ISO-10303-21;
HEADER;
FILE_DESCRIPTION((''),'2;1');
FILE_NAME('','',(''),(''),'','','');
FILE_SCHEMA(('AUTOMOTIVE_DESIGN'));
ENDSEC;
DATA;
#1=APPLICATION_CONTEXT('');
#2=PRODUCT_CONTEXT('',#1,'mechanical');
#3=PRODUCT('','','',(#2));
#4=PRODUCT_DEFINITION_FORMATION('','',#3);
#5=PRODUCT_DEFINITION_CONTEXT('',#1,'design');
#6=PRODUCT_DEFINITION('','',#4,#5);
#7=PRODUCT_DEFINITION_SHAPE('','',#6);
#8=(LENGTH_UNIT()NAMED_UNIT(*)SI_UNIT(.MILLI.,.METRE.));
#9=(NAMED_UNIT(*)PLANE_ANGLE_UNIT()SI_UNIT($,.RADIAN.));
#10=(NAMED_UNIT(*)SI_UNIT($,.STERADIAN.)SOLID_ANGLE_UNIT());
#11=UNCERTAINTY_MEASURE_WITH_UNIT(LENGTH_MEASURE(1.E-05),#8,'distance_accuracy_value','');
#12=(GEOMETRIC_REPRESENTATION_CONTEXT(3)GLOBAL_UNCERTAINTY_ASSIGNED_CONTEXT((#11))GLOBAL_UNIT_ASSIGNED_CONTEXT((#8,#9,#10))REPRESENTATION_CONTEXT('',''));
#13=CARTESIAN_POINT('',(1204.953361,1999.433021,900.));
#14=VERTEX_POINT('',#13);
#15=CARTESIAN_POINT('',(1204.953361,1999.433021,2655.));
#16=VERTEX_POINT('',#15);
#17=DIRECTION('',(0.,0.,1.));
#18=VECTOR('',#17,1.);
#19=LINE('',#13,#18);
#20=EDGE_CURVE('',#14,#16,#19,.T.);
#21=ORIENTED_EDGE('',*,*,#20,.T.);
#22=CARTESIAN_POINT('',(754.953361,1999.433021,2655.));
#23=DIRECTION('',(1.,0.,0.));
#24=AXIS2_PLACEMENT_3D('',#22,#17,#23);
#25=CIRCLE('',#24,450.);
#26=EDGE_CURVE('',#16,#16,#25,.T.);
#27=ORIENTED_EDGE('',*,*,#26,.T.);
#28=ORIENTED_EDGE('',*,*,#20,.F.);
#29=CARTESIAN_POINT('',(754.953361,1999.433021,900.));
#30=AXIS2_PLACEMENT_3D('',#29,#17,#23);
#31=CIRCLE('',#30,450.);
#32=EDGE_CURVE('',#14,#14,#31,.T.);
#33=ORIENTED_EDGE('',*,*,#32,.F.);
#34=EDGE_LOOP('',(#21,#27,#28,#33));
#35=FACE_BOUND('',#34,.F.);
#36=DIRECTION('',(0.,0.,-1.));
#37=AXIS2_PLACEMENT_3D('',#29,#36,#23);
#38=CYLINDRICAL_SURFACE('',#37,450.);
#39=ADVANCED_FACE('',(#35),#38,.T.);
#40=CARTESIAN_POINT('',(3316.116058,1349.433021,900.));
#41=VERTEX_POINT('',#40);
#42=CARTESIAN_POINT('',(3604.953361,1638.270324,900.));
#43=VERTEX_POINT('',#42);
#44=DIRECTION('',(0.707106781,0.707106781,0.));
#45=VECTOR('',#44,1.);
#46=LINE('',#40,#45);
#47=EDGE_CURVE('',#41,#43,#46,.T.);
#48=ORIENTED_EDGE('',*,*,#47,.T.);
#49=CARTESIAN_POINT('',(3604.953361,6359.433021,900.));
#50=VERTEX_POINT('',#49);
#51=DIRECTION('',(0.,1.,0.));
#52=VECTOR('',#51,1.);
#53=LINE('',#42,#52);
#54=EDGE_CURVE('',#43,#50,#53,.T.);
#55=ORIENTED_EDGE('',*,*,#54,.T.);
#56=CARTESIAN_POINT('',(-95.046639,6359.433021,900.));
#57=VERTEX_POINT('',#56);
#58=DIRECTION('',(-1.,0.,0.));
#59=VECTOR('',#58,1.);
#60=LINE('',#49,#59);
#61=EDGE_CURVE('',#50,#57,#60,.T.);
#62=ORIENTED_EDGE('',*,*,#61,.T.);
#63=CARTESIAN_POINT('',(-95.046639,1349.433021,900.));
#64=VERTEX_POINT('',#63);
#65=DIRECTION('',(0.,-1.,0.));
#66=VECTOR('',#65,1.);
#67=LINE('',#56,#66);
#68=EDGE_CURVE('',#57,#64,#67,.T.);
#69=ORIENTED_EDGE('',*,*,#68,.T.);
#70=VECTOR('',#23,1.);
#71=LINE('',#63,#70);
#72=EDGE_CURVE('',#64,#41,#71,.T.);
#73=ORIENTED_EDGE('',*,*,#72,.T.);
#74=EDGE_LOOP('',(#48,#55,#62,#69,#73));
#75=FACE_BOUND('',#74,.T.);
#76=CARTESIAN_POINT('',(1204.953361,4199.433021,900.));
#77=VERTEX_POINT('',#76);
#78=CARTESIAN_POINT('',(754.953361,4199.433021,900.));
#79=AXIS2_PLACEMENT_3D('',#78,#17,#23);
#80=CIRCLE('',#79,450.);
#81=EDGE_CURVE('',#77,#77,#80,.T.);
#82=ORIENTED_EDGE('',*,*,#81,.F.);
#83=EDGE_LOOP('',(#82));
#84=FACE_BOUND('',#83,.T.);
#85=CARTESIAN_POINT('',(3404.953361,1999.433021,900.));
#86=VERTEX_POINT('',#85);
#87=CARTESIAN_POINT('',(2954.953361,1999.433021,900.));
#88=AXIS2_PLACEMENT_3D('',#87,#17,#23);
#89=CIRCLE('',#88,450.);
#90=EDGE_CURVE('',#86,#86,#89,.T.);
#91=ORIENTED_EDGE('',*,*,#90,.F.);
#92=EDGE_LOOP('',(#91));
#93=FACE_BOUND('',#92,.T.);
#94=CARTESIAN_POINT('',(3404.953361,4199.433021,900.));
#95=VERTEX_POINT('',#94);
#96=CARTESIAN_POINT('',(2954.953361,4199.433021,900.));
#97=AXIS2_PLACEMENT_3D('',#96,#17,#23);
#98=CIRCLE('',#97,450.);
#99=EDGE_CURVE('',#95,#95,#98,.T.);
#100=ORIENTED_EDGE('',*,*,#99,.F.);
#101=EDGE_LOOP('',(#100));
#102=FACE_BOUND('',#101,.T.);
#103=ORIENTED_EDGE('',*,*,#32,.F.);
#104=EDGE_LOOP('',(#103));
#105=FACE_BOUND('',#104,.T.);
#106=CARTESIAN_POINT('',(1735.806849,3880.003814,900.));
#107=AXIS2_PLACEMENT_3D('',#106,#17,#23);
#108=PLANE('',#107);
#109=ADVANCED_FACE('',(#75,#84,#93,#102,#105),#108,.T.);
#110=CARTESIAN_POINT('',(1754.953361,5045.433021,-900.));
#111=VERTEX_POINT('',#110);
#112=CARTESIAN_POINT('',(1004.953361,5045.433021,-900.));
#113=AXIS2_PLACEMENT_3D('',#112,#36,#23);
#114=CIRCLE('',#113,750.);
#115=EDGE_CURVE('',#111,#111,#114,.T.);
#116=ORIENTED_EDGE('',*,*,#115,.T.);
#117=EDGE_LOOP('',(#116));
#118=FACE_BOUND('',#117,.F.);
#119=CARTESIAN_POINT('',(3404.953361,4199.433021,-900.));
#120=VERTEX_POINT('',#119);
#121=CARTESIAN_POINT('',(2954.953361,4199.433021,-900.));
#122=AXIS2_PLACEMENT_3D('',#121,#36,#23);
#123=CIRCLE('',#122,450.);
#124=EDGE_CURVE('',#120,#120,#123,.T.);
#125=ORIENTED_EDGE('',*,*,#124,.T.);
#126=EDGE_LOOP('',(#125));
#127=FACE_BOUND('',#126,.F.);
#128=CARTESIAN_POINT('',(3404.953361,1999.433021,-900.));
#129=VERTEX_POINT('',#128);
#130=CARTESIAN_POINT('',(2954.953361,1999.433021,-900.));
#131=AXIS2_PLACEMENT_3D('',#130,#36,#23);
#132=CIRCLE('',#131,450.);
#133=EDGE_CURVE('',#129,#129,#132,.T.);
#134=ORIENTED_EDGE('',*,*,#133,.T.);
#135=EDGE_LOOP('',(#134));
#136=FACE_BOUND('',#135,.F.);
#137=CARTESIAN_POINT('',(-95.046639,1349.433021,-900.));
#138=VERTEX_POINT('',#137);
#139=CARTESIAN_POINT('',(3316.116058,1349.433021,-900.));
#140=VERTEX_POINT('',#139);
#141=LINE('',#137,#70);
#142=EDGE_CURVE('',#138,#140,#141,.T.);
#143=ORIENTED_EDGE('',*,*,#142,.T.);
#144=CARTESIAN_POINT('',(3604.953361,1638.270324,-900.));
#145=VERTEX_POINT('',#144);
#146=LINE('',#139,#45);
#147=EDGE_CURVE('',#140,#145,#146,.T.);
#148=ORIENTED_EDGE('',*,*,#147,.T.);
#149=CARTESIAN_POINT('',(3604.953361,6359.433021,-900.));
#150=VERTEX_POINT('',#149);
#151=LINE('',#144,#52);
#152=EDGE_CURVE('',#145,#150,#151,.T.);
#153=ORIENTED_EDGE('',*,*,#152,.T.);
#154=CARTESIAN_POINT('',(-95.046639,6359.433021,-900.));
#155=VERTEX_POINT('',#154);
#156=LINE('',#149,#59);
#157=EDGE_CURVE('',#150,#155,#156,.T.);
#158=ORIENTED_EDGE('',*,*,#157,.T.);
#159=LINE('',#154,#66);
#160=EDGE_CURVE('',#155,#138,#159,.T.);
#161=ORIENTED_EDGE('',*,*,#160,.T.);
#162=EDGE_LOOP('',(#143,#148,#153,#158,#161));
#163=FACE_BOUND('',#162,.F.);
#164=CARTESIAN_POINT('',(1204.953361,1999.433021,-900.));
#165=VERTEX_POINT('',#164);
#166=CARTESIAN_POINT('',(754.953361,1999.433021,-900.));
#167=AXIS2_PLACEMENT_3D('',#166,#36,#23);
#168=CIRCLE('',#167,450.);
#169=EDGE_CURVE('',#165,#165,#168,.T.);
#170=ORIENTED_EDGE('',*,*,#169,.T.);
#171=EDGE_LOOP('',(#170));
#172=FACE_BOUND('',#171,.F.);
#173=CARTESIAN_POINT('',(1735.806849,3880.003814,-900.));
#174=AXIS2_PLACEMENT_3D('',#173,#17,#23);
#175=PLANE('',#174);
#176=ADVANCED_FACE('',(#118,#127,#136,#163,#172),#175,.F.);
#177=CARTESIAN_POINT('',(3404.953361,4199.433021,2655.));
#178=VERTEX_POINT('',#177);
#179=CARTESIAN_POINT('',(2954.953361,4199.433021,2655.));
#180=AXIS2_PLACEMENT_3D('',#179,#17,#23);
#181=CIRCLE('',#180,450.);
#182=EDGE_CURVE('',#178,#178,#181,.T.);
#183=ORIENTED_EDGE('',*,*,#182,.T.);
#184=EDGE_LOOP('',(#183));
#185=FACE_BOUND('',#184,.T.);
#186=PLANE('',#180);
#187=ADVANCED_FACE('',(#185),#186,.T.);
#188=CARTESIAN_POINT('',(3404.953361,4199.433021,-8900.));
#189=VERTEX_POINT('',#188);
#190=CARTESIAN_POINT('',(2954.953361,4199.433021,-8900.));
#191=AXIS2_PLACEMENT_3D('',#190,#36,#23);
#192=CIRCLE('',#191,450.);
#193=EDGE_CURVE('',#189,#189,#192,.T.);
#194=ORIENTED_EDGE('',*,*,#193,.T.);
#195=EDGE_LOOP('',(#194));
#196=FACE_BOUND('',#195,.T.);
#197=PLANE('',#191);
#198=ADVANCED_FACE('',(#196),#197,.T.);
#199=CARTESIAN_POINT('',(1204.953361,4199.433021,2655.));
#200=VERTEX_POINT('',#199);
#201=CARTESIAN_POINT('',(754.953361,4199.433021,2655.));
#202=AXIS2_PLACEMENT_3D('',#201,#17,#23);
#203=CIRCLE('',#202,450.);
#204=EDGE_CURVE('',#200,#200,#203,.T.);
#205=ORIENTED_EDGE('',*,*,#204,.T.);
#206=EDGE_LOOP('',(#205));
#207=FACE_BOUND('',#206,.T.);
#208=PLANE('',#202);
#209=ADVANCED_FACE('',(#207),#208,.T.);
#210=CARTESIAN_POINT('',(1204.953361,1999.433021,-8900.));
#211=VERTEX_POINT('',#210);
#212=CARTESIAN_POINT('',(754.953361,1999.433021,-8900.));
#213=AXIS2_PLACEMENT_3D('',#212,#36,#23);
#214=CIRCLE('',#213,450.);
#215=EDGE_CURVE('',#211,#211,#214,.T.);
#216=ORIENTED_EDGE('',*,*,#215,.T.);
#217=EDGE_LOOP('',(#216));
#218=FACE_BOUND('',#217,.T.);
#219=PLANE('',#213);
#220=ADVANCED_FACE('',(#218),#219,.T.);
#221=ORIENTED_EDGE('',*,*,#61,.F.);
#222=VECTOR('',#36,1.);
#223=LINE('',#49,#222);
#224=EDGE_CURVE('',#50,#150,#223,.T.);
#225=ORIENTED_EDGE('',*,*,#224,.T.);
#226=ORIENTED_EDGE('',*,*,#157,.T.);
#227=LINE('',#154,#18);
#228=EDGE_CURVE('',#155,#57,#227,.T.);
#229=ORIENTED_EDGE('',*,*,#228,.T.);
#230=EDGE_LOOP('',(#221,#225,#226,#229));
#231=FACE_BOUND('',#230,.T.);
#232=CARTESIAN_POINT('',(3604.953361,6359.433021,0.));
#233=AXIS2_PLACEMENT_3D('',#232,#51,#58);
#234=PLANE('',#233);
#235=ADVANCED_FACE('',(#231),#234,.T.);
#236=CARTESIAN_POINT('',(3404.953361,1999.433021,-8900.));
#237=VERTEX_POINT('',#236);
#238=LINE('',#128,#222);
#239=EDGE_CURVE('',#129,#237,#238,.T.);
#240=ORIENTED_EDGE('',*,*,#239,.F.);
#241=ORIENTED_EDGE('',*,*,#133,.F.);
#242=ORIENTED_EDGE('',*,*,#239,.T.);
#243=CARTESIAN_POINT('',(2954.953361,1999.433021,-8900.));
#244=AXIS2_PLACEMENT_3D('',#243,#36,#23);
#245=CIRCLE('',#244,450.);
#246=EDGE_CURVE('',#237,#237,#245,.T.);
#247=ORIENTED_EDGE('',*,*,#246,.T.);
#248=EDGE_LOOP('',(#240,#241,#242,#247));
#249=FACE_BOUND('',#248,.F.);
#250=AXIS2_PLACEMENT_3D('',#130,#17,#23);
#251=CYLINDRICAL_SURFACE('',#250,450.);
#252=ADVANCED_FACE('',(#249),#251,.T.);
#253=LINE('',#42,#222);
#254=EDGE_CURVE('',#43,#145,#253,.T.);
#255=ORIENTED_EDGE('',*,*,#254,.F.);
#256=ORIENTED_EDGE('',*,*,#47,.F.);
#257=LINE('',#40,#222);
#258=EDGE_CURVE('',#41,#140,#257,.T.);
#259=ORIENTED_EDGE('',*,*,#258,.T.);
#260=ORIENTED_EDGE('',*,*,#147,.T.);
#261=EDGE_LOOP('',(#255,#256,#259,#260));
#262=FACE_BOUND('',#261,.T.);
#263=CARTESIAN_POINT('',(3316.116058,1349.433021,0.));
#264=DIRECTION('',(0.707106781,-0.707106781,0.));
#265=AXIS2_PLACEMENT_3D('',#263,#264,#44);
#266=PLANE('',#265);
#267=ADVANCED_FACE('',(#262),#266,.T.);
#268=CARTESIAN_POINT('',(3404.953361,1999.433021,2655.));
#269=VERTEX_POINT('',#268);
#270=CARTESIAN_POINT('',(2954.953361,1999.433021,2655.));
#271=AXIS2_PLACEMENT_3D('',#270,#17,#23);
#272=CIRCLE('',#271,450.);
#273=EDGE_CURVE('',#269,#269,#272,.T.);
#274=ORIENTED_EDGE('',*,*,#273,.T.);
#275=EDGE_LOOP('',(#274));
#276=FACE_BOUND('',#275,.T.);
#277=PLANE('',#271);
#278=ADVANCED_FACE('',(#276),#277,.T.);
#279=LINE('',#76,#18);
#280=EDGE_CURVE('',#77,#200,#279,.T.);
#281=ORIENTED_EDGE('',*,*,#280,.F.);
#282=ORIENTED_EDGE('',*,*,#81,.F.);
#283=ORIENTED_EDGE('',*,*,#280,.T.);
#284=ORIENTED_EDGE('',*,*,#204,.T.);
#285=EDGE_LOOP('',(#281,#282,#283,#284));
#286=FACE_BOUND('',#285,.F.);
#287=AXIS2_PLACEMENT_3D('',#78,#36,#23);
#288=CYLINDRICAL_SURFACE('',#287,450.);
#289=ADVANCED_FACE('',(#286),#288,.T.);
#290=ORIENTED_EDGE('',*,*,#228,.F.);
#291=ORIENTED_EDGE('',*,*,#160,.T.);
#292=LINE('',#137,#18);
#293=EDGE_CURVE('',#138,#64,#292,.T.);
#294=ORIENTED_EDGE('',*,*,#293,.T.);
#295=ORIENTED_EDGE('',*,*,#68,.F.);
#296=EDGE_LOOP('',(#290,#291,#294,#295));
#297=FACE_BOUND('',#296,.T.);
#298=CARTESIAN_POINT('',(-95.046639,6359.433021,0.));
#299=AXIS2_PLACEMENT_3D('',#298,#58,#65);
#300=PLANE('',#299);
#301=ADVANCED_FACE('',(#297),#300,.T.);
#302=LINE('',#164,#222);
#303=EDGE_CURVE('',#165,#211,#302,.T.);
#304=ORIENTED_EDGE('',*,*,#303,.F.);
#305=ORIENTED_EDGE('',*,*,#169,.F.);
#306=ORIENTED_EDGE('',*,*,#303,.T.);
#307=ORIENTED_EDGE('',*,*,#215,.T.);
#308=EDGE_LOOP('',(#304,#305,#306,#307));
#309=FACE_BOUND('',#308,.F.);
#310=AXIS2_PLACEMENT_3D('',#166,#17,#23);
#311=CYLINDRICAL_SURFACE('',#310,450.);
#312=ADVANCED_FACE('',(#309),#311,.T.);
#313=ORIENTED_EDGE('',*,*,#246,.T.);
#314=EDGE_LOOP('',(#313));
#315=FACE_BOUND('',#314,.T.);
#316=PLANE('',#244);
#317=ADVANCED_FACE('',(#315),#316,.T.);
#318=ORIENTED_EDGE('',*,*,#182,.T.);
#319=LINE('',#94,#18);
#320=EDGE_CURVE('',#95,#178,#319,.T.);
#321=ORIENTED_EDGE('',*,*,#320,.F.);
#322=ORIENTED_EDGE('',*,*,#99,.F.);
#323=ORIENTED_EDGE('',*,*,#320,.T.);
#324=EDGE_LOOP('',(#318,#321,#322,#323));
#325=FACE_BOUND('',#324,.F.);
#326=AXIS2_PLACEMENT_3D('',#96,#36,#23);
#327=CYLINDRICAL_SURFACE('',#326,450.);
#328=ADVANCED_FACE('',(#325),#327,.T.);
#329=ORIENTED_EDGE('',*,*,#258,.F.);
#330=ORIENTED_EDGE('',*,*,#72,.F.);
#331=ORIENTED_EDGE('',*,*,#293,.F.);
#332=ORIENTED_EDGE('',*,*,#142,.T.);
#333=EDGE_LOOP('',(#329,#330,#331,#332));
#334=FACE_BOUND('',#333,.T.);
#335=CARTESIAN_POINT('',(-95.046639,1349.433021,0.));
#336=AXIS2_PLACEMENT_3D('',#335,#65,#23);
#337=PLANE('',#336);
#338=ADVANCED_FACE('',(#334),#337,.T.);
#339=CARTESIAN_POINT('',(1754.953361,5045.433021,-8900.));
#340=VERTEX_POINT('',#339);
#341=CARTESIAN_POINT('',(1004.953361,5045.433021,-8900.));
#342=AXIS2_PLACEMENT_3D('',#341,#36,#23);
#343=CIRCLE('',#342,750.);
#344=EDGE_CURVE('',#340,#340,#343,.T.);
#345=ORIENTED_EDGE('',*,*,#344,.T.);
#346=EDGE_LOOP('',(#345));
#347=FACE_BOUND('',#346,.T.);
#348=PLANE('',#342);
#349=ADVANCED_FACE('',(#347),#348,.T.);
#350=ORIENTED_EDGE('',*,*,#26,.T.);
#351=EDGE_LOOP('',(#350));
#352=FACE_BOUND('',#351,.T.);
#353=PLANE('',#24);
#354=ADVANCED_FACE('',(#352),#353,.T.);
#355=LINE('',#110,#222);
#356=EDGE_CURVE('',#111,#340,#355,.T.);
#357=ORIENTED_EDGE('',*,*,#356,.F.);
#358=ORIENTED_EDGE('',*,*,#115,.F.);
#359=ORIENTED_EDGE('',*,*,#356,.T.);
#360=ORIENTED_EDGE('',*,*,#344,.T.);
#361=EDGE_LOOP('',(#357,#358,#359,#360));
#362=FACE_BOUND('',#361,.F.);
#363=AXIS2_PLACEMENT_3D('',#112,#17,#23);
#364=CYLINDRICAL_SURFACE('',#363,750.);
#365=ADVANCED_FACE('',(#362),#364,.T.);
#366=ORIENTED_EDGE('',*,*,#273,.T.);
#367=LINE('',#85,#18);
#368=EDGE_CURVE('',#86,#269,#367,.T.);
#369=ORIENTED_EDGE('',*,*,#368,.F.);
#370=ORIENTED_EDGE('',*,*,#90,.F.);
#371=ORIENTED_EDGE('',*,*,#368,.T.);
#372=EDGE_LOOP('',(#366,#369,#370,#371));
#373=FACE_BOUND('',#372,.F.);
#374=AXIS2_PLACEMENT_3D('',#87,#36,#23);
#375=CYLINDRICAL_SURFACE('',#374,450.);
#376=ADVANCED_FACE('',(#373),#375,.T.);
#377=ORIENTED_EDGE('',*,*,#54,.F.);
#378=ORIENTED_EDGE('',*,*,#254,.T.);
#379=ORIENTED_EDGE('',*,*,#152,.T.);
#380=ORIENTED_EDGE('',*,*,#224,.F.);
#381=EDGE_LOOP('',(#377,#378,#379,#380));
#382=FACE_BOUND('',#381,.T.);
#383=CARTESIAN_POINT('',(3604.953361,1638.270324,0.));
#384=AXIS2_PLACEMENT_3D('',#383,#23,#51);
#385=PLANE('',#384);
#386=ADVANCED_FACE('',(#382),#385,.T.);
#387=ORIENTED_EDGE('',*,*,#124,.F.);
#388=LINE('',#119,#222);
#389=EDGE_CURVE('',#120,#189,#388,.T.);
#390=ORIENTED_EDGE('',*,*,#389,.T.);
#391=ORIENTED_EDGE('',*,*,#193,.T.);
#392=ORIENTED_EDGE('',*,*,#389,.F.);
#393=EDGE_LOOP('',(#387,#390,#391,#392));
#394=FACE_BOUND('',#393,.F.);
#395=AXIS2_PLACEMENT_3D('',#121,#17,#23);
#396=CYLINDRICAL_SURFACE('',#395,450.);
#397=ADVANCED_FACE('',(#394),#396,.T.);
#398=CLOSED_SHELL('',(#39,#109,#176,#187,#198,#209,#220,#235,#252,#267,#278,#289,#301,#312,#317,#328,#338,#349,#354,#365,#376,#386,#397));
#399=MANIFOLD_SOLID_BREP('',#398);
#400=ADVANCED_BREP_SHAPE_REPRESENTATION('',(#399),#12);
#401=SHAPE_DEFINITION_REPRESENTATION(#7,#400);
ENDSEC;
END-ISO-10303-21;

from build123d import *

# Parameters (mm, degrees)
F1_DEPTH = 900
F2_R     = 450
F3_DEPTH = 1755
F4_R     = 450
F4_R_2   = 750
F5_DEPTH = 8000


# Not quite as in the source:
# - the program builds the solid bodies; features that only make, move or delete a surface that nothing else refers to are left out


with BuildPart() as f1:
    # F0 (on Top) → F1 (new body, symmetric)
    with BuildSketch(Plane.XY):
        Polygon((3604.9533605576, 6359.4330211878), (-95.0466394424, 6359.4330211878), (-95.0466394424, 1349.4330211878), (3316.1160576543, 1349.4330211878), (3604.9533605576, 1638.270324091), align=None)
    extrude(amount=F1_DEPTH, both=True)

    # F2 (on face) → F3 (join)
    with BuildSketch(Plane.XY.offset(900)):
        with Locations((754.9533605576, 4199.4330211878)):
            Circle(F2_R)
        with Locations((754.9533605576, 1999.4330211878)):
            Circle(F2_R)
        with Locations((2954.9533605576, 4199.4330211878)):
            Circle(F2_R)
        with Locations((2954.9533605576, 1999.4330211878)):
            Circle(F2_R)
    extrude(amount=F3_DEPTH)

    # F4 (on face) → F5 (join)
    with BuildSketch(Plane(origin=(0, 0, -900), x_dir=(1, 0, 0), z_dir=(0, 0, -1))):
        with Locations((754.9533605576, -1999.4330211878)):
            Circle(F4_R)
        with Locations((2954.9533605576, -1999.4330211878)):
            Circle(F4_R)
        with Locations((2954.9533605576, -4199.4330211878)):
            Circle(F4_R)
        with Locations((1004.9533605576, -5045.4330211878)):
            Circle(F4_R_2)
    extrude(amount=F5_DEPTH)


solid = f1.part
